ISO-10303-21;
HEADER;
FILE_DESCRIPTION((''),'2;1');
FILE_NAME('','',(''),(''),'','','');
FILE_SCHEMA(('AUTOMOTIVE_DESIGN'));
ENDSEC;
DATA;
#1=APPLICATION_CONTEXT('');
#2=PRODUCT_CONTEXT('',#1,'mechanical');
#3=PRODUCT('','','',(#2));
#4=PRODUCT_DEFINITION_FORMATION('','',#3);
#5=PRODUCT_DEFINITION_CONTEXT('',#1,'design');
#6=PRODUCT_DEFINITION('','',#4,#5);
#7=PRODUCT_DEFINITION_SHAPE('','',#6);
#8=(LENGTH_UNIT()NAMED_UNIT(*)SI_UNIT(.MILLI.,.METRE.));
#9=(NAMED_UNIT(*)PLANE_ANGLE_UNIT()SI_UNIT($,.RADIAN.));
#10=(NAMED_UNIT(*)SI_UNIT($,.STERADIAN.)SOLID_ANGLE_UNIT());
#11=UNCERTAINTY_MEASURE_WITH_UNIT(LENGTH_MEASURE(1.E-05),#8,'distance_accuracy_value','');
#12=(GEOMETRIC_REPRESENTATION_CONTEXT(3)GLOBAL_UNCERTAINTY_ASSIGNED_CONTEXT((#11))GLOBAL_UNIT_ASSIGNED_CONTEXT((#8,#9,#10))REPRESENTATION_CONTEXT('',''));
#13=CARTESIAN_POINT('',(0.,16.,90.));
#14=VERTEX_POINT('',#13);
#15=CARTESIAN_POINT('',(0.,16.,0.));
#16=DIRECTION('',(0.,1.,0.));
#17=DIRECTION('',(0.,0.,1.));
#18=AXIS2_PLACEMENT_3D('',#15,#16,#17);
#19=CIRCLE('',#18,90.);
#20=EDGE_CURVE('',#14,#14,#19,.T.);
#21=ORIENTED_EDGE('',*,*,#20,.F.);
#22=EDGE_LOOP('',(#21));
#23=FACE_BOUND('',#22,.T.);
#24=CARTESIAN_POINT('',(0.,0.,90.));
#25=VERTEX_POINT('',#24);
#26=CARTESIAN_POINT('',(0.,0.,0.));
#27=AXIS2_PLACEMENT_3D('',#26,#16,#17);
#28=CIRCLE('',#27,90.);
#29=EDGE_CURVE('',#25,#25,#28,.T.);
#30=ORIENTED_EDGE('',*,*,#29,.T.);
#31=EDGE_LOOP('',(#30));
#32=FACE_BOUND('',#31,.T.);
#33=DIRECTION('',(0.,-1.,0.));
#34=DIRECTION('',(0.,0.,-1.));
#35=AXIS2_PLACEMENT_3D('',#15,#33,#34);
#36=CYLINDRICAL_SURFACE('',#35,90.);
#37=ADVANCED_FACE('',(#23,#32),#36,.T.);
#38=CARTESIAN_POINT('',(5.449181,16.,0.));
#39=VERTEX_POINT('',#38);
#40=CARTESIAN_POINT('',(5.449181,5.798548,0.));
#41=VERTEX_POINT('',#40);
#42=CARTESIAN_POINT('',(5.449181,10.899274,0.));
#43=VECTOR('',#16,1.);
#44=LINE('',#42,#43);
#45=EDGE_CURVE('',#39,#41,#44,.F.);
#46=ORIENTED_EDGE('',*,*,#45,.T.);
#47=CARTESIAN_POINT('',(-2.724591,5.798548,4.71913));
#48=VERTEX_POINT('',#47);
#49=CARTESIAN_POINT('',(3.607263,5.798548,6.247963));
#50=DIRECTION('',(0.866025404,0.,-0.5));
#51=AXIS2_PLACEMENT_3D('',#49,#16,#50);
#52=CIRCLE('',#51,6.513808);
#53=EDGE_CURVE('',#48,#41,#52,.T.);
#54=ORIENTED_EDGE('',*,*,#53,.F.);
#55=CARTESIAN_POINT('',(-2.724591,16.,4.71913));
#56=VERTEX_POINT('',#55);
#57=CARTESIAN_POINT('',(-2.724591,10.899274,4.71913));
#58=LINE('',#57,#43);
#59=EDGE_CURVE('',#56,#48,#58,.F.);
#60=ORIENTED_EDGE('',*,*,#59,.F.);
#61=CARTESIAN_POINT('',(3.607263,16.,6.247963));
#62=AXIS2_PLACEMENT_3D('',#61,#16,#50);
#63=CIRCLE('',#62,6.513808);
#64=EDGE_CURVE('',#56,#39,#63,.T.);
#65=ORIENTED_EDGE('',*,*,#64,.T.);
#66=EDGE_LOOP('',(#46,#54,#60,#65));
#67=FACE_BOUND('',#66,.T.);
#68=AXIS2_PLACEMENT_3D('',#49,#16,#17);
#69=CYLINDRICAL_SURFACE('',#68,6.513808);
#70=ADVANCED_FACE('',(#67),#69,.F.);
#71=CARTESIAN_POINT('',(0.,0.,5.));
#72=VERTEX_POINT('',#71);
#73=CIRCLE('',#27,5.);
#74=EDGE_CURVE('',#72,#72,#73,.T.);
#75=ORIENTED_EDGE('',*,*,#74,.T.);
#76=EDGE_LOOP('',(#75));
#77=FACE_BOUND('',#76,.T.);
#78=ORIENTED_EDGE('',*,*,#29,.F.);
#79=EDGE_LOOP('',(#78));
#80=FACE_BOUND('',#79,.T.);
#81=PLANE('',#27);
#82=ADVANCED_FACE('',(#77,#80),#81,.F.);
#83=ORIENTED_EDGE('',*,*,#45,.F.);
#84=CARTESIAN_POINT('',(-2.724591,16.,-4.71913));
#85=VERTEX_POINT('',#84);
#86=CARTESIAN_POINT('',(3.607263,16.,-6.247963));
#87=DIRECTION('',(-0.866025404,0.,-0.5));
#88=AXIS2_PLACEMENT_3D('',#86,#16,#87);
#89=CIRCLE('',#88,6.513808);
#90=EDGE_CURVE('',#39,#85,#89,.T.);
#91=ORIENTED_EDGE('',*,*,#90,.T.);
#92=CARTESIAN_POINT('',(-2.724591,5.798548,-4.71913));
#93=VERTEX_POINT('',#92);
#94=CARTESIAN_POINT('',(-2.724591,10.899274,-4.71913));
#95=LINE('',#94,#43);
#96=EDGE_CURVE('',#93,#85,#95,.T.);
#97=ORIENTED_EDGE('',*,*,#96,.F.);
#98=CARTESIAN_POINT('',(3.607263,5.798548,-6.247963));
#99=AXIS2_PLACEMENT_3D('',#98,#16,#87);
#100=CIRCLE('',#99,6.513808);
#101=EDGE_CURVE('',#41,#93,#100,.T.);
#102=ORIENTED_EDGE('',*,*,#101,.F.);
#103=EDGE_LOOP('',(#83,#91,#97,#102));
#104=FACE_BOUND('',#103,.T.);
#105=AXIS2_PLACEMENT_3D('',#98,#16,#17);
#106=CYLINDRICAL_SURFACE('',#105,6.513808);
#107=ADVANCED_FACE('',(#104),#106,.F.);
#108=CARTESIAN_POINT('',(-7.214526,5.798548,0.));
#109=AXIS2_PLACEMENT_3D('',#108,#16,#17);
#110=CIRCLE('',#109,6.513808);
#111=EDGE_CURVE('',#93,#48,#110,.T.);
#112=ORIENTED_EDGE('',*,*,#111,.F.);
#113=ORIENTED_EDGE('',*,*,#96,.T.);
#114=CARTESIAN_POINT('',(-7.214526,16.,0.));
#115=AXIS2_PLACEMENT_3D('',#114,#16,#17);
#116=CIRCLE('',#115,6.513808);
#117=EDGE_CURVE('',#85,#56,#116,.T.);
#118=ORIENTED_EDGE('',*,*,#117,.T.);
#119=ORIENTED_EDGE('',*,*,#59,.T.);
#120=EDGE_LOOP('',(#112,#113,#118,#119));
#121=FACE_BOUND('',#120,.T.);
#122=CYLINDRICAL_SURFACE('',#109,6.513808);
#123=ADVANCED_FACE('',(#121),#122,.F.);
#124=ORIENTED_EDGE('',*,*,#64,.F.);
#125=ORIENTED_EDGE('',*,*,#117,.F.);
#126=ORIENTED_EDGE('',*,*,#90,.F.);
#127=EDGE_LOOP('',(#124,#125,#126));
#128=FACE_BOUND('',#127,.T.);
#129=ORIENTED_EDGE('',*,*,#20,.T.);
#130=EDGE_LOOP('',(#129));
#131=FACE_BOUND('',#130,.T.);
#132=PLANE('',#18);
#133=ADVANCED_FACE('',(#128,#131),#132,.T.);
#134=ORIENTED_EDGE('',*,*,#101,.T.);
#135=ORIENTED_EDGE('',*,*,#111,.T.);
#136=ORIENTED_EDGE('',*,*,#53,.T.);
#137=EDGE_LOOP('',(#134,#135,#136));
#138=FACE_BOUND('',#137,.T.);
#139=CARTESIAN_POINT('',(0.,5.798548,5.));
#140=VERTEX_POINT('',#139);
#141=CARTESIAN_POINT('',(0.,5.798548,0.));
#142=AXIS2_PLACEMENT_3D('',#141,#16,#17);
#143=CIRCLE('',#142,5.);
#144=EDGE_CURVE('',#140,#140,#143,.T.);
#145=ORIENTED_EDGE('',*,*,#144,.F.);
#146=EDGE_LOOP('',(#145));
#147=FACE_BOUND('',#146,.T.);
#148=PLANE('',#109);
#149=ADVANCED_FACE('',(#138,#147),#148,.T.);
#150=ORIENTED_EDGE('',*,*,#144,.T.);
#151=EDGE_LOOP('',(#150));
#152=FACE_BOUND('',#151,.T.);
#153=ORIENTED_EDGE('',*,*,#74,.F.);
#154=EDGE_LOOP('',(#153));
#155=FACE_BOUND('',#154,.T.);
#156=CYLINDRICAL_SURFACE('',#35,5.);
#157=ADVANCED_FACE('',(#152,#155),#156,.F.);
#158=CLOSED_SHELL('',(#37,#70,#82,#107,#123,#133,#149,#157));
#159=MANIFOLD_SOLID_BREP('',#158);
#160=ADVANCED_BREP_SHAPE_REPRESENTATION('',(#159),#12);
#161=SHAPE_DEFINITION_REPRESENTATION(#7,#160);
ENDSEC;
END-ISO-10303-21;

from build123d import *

# Parameters (mm, degrees)
SKETCH1_R           = 90
BOSS_EXTRUDE1_DEPTH = 16
SKETCH2_R           = 5
CUT_EXTRUDE1_DEPTH  = 129.280941687
SKETCH3_R           = 6.513808384
CUT_EXTRUDE2_DEPTH  = 10.201451925
CIRPATTERN1_COUNT   = 3


with BuildPart() as part:
    # Sketch1 → Boss-Extrude1 (new body)
    with BuildSketch(Plane(origin=(0, 0, 0), x_dir=(1, 0, 0), z_dir=(0, 1, 0))):
        Circle(SKETCH1_R)
    extrude(amount=BOSS_EXTRUDE1_DEPTH)

    # Sketch2 → Cut-Extrude1 (cut, through all)
    with BuildSketch(Plane(origin=(0, 0, 0), x_dir=(1, 0, 0), z_dir=(0, 1, 0))):
        Circle(SKETCH2_R)
    extrude(amount=CUT_EXTRUDE1_DEPTH, mode=Mode.SUBTRACT)

    # Sketch3 → Cut-Extrude2 (cut)
    with BuildSketch(Plane(origin=(0, 16, 0), x_dir=(1, 0, 0), z_dir=(0, 1, 0))):
        with Locations((-7.214525681, 0)):
            Circle(SKETCH3_R)
    cut_extrude2 = extrude(amount=-CUT_EXTRUDE2_DEPTH, mode=Mode.SUBTRACT)

    # CirPattern1: Cut-Extrude2 ×3 about axis
    cirpattern1_axis = Axis((0, 0, 0), (0, 1, 0))
    for i in range(1, CIRPATTERN1_COUNT):
        add(cut_extrude2.rotate(cirpattern1_axis, i * 360 / CIRPATTERN1_COUNT), mode=Mode.SUBTRACT)


solid = part.part
